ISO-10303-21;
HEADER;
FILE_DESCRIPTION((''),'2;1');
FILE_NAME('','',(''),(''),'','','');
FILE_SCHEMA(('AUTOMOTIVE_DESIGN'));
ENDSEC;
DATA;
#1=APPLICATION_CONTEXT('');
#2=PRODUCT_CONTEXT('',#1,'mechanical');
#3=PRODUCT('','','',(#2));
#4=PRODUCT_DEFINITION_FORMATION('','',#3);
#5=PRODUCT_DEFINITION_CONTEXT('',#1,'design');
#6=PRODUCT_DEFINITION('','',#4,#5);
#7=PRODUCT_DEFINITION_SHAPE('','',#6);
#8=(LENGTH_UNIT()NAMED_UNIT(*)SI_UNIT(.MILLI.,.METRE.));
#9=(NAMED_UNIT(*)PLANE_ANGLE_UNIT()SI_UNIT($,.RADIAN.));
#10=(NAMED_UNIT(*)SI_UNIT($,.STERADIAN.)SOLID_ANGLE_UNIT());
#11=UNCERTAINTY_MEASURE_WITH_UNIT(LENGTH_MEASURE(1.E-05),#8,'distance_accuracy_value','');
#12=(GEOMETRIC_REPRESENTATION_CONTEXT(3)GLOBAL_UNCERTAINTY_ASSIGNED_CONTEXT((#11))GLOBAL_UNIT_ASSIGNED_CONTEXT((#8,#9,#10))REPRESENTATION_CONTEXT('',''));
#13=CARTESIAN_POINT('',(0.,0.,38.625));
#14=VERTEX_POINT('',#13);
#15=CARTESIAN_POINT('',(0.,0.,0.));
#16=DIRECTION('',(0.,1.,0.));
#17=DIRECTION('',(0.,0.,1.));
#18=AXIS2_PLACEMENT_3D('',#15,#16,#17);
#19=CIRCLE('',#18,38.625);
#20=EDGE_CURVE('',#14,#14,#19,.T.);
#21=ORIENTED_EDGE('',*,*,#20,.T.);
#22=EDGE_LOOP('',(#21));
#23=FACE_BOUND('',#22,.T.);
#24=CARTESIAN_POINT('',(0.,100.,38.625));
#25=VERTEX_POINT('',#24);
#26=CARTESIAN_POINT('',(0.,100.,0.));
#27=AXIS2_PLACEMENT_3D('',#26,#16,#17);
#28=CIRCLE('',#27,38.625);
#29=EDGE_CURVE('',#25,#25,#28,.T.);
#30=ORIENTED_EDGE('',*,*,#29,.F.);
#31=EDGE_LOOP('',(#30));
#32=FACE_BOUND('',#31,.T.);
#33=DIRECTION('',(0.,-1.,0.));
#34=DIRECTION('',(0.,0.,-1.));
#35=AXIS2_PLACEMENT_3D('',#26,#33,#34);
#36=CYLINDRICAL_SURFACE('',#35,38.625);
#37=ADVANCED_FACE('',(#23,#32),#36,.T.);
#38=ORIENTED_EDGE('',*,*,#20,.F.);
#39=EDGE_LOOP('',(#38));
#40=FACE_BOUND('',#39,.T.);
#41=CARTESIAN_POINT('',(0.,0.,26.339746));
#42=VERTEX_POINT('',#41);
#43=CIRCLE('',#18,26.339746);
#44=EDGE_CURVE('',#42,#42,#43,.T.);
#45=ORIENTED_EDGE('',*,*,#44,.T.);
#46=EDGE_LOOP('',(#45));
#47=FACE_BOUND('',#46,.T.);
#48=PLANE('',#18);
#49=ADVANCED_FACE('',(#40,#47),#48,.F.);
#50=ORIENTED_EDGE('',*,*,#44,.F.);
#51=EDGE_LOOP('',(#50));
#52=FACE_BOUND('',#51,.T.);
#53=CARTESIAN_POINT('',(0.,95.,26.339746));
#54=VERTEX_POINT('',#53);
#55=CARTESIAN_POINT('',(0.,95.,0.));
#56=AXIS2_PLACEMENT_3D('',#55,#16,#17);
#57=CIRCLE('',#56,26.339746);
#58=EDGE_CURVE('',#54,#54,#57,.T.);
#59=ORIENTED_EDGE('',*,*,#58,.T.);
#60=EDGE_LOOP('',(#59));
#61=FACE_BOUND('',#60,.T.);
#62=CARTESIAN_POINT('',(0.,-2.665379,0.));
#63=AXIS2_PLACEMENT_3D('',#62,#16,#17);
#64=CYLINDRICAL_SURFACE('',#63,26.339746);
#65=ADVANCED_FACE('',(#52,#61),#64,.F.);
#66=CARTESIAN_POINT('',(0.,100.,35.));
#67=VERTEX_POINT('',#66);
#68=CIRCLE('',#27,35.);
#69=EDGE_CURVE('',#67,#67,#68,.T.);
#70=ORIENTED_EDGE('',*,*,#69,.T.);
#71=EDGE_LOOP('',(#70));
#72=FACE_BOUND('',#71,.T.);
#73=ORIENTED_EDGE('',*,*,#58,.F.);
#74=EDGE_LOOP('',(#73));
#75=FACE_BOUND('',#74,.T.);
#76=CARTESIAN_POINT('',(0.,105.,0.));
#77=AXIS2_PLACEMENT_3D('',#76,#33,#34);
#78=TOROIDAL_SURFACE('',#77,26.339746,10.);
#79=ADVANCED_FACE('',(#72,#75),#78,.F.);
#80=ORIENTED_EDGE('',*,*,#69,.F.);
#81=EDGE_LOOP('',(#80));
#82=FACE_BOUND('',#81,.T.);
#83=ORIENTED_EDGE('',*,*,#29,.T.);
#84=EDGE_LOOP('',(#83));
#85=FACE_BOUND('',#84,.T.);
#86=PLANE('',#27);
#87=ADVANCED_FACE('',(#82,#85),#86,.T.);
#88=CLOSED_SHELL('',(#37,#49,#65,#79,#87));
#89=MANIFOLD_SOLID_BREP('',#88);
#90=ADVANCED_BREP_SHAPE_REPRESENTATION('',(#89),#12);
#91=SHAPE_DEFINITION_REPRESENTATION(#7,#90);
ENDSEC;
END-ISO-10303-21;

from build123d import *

# Parameters (mm, degrees)
SKETCH_1_R          = 38.625
EXTRUDE_1_DEPTH     = 100
SKETCH_2_R          = 35
CUT_EXTRUDE_3_DEPTH = 5
FILLET_8_R          = 10
SKETCH_4_R          = 26.339745962
CUT_EXTRUDE_4_DEPTH = 97.665379301


with BuildPart() as part:
    # 草圖1 → 填料-伸長1 (new body)
    with BuildSketch(Plane(origin=(0, 0, 0), x_dir=(1, 0, 0), z_dir=(0, 1, 0))):
        with Locations(Location((0, 0, 0), (0, 0, 270))):
            Circle(SKETCH_1_R)
    extrude(amount=EXTRUDE_1_DEPTH)

    # 草圖2 → 除料-伸長3 (cut)
    with BuildSketch(Plane(origin=(0, 100, 0), x_dir=(1, 0, 0), z_dir=(0, 1, 0))):
        with Locations(Location((0, 0, 0), (0, 0, 270))):
            Circle(SKETCH_2_R)
    extrude(amount=-CUT_EXTRUDE_3_DEPTH, mode=Mode.SUBTRACT)

    # 圓角8
    # the kernel refuses this fillet: 10 mm, written as the material it adds along each edge
    with BuildSketch(Plane(origin=(0, 95, 0), x_dir=(0, 0, 1), z_dir=(-1, 0, 0))) as fillet_8_piece_1:
        with BuildLine():
            CenterArc((26.339745962, 10), FILLET_8_R, 270, 60)
            Line((26.339745962, 0), (26.339745962, -0.2))
            Line((26.339745962, -0.2), (35, -0.2))
            Line((35, -0.2), (35.2, 0))
            ThreePointArc((35.2, 0), (35.2, 2.5), (35.173205081, 4.9))
            Line((35.173205081, 4.9), (35, 5))
        make_face()
    revolve(axis=Axis((0, 95, 0), (0, 1, 0)))

    # 草圖4 → 除料-伸長4 (cut)
    with BuildSketch(Plane(origin=(0, 95, 0), x_dir=(1, 0, 0), z_dir=(0, 1, 0))):
        with Locations(Location((0, 0, 0), (0, 0, 270))):
            Circle(SKETCH_4_R)
    extrude(amount=-CUT_EXTRUDE_4_DEPTH, mode=Mode.SUBTRACT)


solid = part.part
